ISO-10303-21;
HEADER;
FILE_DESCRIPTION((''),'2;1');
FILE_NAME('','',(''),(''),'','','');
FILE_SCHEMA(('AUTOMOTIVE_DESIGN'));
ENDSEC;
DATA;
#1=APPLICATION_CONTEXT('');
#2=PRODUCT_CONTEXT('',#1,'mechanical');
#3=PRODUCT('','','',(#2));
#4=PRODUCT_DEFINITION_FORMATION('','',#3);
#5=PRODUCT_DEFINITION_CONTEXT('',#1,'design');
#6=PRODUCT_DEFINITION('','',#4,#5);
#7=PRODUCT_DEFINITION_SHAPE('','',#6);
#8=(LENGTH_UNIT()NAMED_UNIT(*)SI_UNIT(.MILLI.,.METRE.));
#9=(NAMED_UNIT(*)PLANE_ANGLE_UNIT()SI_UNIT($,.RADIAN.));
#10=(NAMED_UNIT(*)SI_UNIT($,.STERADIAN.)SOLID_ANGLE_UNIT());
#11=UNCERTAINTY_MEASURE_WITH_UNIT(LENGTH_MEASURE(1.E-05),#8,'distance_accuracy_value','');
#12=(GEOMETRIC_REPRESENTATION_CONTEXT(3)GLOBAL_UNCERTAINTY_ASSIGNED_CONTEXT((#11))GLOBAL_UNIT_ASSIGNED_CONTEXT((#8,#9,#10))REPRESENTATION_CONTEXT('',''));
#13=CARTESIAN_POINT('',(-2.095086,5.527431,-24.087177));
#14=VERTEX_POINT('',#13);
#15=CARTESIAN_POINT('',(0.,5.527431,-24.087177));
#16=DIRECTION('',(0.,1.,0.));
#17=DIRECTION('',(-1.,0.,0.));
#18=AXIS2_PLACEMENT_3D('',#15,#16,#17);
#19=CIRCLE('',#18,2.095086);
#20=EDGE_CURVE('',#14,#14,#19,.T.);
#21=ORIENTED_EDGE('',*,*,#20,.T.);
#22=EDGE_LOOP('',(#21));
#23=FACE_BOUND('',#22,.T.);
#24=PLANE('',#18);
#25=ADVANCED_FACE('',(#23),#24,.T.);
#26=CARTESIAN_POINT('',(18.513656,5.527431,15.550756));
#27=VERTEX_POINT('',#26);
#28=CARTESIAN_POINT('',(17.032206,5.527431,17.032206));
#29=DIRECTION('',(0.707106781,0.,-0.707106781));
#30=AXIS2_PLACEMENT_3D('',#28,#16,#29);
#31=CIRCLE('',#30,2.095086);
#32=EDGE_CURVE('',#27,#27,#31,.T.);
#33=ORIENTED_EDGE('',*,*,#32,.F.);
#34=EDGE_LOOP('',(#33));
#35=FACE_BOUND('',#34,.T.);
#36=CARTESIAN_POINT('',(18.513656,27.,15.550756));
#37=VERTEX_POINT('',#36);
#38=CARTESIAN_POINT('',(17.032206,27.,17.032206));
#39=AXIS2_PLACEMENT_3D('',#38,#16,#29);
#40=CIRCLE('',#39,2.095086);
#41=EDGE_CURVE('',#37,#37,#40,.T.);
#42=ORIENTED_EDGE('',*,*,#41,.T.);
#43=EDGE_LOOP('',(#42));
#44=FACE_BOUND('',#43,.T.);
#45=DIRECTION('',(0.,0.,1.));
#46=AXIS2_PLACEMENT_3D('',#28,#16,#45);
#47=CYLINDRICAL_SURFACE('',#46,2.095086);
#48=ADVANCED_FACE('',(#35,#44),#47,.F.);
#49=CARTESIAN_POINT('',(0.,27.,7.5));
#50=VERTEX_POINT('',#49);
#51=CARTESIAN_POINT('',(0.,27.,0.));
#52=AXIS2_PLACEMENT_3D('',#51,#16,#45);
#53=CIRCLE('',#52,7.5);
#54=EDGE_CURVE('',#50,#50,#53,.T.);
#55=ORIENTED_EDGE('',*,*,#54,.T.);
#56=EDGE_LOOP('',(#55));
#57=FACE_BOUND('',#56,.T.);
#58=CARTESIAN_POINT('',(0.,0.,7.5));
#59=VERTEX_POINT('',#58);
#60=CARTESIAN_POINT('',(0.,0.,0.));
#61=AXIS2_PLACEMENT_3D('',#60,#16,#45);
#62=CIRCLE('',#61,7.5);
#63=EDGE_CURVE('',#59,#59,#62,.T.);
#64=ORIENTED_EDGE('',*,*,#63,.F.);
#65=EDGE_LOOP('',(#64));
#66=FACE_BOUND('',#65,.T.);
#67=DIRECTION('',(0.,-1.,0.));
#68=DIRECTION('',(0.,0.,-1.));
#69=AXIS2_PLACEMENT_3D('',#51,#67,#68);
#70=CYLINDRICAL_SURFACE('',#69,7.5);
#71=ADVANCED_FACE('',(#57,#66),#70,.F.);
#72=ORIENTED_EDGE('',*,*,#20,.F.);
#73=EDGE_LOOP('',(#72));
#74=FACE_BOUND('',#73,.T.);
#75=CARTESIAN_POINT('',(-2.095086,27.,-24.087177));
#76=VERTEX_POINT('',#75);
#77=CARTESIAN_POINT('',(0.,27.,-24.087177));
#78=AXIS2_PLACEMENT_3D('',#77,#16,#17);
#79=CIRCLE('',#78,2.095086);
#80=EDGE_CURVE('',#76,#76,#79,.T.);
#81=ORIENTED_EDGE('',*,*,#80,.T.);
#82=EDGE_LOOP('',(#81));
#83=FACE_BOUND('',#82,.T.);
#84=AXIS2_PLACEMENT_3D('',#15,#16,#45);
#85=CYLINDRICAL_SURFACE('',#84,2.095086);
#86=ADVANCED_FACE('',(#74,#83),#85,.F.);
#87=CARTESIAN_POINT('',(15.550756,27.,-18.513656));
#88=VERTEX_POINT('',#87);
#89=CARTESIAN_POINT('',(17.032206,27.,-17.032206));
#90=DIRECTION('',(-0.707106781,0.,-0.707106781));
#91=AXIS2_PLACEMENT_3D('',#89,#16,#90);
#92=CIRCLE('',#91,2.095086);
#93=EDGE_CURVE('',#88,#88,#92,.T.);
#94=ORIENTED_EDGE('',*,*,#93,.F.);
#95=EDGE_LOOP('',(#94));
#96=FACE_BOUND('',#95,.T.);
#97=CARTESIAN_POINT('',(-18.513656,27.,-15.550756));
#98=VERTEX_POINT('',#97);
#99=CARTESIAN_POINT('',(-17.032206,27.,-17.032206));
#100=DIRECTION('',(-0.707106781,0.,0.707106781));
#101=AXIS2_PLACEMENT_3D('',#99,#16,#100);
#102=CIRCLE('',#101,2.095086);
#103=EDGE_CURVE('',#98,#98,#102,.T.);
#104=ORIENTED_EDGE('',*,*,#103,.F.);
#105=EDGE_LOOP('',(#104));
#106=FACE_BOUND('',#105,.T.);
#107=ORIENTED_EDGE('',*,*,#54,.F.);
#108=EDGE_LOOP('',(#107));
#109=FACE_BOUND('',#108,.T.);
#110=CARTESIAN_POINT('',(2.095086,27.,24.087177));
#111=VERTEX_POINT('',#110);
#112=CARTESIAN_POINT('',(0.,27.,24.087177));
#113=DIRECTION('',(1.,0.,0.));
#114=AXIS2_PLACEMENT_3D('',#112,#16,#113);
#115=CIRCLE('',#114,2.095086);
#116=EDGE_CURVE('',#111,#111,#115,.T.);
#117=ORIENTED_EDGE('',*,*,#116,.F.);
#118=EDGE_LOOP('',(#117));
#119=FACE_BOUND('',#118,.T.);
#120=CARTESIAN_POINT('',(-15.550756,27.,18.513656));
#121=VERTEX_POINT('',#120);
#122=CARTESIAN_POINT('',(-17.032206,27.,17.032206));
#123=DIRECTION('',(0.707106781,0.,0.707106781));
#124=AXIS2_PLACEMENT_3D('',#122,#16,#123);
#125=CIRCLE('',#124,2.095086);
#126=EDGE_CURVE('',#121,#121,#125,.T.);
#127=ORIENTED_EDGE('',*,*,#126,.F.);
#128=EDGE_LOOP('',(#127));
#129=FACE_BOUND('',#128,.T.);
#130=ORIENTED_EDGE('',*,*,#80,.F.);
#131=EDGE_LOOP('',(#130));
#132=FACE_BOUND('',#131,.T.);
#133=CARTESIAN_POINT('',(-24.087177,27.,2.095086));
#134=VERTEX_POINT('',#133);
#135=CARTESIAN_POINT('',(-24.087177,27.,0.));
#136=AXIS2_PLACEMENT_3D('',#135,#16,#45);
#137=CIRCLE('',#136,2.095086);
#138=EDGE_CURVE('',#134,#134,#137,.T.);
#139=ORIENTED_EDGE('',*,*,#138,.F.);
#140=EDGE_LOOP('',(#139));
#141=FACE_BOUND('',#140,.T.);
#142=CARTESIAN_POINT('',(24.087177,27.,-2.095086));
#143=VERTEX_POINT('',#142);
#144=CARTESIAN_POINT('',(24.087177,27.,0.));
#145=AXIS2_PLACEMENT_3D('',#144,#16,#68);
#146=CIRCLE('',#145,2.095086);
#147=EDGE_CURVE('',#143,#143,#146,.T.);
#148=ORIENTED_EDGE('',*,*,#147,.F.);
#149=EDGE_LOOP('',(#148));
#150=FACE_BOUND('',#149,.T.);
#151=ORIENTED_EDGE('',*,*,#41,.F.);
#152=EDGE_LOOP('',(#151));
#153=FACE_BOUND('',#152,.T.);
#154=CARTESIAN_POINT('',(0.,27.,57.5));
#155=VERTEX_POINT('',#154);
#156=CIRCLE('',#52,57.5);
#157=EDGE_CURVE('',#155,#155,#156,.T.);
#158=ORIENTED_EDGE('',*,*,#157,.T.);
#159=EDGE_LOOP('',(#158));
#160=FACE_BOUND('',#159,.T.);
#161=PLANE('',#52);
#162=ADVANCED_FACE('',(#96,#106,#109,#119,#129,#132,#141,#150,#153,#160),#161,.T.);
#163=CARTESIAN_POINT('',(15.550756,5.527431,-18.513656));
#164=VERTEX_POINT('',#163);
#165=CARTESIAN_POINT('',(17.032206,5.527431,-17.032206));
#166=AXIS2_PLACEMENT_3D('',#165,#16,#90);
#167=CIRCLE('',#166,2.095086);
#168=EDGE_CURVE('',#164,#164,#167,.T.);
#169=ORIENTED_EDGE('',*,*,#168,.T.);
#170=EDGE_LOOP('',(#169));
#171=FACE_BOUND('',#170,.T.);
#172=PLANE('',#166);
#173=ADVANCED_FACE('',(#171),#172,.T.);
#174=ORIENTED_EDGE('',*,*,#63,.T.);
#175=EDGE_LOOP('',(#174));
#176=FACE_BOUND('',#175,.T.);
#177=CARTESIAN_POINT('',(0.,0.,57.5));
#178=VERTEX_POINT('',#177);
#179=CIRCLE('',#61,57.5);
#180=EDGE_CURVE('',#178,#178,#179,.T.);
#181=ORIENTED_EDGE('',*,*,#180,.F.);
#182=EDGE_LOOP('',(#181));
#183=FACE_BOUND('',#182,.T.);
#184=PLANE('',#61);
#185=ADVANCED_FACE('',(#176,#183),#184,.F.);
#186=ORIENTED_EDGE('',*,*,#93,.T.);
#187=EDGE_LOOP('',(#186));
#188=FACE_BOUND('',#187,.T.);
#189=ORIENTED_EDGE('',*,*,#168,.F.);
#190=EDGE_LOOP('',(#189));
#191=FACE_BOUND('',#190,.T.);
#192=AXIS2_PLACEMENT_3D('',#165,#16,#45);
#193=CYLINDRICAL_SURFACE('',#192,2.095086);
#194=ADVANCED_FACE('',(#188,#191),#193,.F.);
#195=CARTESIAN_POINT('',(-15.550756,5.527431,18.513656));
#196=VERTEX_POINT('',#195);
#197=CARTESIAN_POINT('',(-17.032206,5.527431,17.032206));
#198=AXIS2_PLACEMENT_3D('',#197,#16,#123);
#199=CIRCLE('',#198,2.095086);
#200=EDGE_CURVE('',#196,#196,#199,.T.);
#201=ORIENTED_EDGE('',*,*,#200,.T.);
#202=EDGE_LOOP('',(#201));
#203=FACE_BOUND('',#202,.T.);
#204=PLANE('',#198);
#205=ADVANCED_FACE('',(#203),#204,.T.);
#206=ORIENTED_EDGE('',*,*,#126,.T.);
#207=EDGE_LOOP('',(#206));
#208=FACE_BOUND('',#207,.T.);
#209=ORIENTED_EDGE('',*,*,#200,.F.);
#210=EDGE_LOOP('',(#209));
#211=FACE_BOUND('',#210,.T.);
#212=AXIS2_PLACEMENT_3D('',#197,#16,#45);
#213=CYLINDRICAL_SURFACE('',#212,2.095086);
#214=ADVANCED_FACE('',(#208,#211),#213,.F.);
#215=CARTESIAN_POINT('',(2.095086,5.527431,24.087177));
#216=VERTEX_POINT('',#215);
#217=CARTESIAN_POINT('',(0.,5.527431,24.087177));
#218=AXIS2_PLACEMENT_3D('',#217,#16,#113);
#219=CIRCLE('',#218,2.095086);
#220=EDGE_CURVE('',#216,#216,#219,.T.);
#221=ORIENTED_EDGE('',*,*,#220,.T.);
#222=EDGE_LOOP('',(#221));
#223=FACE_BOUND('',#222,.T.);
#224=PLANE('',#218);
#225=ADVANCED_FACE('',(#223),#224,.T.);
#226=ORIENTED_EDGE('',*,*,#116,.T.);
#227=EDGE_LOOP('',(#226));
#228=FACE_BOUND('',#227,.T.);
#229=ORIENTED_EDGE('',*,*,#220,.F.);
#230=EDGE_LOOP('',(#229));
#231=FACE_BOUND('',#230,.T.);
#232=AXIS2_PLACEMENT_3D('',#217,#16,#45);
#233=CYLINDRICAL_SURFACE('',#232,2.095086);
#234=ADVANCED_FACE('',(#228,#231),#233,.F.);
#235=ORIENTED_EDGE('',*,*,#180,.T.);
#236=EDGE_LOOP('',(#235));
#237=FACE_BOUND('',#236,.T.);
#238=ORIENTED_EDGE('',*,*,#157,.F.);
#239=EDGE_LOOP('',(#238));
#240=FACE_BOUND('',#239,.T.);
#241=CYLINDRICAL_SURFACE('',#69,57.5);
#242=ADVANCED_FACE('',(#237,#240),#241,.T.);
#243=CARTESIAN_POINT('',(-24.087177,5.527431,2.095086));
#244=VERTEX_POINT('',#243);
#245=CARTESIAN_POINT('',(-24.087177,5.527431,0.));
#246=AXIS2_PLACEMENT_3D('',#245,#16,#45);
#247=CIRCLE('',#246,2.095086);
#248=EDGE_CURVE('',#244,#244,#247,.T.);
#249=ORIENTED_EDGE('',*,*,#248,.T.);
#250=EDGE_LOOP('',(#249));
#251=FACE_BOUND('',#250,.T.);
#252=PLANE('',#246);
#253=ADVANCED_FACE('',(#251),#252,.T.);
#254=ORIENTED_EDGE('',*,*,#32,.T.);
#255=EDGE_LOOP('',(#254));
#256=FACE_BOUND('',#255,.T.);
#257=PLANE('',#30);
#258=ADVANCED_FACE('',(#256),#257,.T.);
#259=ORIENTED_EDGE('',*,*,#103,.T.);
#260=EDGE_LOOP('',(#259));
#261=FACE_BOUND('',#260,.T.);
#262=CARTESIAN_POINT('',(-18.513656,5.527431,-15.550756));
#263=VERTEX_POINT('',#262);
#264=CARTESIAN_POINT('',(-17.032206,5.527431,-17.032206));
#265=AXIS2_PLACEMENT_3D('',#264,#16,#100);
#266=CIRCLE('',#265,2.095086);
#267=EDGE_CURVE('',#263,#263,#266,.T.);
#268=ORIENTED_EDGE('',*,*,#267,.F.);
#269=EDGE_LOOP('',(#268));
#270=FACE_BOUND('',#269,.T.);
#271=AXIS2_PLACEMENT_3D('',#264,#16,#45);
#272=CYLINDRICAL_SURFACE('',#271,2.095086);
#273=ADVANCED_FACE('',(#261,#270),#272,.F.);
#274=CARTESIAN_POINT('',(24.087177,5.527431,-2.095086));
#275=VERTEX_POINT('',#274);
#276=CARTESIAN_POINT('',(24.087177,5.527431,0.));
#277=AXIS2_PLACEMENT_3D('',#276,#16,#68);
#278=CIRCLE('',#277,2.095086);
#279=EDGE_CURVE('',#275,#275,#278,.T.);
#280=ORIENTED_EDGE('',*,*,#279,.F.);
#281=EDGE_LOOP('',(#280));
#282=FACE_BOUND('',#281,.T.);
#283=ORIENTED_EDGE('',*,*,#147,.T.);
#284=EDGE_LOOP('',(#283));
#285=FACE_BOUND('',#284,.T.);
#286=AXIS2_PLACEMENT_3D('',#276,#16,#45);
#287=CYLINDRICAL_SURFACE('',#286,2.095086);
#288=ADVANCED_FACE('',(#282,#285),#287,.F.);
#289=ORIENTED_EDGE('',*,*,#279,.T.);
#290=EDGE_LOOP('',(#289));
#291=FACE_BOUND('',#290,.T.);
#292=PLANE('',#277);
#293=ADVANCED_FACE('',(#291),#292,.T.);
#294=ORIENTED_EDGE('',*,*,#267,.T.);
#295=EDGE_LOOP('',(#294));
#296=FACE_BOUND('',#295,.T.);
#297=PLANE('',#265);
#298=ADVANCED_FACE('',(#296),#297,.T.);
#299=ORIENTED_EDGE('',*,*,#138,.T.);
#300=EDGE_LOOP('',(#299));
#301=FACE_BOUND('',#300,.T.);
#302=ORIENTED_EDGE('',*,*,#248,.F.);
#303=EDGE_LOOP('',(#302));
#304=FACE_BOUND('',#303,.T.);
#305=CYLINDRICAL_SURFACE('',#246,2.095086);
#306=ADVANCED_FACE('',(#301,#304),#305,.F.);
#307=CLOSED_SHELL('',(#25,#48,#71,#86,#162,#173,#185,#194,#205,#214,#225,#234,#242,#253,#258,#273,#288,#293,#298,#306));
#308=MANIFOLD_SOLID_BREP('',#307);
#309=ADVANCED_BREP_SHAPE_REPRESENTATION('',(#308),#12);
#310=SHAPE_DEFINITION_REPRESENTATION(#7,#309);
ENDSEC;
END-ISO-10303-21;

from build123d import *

# Parameters (mm, degrees)
SKETCH1_R           = 57.5
BOSS_EXTRUDE1_DEPTH = 27
SKETCH2_R           = 7.5
CUT_EXTRUDE1_DEPTH  = 86.68255365
SKETCH3_R           = 2.0950865
CUT_EXTRUDE2_DEPTH  = 21.472569349
CIRPATTERN1_COUNT   = 8


with BuildPart() as part:
    # Sketch1 → Boss-Extrude1 (new body)
    with BuildSketch(Plane(origin=(0, 0, 0), x_dir=(1, 0, 0), z_dir=(0, 1, 0))):
        Circle(SKETCH1_R)
    extrude(amount=BOSS_EXTRUDE1_DEPTH)

    # Sketch2 → Cut-Extrude1 (cut, through all)
    with BuildSketch(Plane(origin=(0, 0, 0), x_dir=(1, 0, 0), z_dir=(0, 1, 0))):
        Circle(SKETCH2_R)
    extrude(amount=CUT_EXTRUDE1_DEPTH, mode=Mode.SUBTRACT)

    # Sketch3 → Cut-Extrude2 (cut)
    with BuildSketch(Plane(origin=(0, 27, 0), x_dir=(1, 0, 0), z_dir=(0, 1, 0))):
        with Locations((-24.087177083, 0)):
            Circle(SKETCH3_R)
    cut_extrude2 = extrude(amount=-CUT_EXTRUDE2_DEPTH, mode=Mode.SUBTRACT)

    # CirPattern1: Cut-Extrude2 ×8 about axis
    cirpattern1_axis = Axis((0, 0, 0), (0, 1, 0))
    for i in range(1, CIRPATTERN1_COUNT):
        add(cut_extrude2.rotate(cirpattern1_axis, i * 360 / CIRPATTERN1_COUNT), mode=Mode.SUBTRACT)


solid = part.part
